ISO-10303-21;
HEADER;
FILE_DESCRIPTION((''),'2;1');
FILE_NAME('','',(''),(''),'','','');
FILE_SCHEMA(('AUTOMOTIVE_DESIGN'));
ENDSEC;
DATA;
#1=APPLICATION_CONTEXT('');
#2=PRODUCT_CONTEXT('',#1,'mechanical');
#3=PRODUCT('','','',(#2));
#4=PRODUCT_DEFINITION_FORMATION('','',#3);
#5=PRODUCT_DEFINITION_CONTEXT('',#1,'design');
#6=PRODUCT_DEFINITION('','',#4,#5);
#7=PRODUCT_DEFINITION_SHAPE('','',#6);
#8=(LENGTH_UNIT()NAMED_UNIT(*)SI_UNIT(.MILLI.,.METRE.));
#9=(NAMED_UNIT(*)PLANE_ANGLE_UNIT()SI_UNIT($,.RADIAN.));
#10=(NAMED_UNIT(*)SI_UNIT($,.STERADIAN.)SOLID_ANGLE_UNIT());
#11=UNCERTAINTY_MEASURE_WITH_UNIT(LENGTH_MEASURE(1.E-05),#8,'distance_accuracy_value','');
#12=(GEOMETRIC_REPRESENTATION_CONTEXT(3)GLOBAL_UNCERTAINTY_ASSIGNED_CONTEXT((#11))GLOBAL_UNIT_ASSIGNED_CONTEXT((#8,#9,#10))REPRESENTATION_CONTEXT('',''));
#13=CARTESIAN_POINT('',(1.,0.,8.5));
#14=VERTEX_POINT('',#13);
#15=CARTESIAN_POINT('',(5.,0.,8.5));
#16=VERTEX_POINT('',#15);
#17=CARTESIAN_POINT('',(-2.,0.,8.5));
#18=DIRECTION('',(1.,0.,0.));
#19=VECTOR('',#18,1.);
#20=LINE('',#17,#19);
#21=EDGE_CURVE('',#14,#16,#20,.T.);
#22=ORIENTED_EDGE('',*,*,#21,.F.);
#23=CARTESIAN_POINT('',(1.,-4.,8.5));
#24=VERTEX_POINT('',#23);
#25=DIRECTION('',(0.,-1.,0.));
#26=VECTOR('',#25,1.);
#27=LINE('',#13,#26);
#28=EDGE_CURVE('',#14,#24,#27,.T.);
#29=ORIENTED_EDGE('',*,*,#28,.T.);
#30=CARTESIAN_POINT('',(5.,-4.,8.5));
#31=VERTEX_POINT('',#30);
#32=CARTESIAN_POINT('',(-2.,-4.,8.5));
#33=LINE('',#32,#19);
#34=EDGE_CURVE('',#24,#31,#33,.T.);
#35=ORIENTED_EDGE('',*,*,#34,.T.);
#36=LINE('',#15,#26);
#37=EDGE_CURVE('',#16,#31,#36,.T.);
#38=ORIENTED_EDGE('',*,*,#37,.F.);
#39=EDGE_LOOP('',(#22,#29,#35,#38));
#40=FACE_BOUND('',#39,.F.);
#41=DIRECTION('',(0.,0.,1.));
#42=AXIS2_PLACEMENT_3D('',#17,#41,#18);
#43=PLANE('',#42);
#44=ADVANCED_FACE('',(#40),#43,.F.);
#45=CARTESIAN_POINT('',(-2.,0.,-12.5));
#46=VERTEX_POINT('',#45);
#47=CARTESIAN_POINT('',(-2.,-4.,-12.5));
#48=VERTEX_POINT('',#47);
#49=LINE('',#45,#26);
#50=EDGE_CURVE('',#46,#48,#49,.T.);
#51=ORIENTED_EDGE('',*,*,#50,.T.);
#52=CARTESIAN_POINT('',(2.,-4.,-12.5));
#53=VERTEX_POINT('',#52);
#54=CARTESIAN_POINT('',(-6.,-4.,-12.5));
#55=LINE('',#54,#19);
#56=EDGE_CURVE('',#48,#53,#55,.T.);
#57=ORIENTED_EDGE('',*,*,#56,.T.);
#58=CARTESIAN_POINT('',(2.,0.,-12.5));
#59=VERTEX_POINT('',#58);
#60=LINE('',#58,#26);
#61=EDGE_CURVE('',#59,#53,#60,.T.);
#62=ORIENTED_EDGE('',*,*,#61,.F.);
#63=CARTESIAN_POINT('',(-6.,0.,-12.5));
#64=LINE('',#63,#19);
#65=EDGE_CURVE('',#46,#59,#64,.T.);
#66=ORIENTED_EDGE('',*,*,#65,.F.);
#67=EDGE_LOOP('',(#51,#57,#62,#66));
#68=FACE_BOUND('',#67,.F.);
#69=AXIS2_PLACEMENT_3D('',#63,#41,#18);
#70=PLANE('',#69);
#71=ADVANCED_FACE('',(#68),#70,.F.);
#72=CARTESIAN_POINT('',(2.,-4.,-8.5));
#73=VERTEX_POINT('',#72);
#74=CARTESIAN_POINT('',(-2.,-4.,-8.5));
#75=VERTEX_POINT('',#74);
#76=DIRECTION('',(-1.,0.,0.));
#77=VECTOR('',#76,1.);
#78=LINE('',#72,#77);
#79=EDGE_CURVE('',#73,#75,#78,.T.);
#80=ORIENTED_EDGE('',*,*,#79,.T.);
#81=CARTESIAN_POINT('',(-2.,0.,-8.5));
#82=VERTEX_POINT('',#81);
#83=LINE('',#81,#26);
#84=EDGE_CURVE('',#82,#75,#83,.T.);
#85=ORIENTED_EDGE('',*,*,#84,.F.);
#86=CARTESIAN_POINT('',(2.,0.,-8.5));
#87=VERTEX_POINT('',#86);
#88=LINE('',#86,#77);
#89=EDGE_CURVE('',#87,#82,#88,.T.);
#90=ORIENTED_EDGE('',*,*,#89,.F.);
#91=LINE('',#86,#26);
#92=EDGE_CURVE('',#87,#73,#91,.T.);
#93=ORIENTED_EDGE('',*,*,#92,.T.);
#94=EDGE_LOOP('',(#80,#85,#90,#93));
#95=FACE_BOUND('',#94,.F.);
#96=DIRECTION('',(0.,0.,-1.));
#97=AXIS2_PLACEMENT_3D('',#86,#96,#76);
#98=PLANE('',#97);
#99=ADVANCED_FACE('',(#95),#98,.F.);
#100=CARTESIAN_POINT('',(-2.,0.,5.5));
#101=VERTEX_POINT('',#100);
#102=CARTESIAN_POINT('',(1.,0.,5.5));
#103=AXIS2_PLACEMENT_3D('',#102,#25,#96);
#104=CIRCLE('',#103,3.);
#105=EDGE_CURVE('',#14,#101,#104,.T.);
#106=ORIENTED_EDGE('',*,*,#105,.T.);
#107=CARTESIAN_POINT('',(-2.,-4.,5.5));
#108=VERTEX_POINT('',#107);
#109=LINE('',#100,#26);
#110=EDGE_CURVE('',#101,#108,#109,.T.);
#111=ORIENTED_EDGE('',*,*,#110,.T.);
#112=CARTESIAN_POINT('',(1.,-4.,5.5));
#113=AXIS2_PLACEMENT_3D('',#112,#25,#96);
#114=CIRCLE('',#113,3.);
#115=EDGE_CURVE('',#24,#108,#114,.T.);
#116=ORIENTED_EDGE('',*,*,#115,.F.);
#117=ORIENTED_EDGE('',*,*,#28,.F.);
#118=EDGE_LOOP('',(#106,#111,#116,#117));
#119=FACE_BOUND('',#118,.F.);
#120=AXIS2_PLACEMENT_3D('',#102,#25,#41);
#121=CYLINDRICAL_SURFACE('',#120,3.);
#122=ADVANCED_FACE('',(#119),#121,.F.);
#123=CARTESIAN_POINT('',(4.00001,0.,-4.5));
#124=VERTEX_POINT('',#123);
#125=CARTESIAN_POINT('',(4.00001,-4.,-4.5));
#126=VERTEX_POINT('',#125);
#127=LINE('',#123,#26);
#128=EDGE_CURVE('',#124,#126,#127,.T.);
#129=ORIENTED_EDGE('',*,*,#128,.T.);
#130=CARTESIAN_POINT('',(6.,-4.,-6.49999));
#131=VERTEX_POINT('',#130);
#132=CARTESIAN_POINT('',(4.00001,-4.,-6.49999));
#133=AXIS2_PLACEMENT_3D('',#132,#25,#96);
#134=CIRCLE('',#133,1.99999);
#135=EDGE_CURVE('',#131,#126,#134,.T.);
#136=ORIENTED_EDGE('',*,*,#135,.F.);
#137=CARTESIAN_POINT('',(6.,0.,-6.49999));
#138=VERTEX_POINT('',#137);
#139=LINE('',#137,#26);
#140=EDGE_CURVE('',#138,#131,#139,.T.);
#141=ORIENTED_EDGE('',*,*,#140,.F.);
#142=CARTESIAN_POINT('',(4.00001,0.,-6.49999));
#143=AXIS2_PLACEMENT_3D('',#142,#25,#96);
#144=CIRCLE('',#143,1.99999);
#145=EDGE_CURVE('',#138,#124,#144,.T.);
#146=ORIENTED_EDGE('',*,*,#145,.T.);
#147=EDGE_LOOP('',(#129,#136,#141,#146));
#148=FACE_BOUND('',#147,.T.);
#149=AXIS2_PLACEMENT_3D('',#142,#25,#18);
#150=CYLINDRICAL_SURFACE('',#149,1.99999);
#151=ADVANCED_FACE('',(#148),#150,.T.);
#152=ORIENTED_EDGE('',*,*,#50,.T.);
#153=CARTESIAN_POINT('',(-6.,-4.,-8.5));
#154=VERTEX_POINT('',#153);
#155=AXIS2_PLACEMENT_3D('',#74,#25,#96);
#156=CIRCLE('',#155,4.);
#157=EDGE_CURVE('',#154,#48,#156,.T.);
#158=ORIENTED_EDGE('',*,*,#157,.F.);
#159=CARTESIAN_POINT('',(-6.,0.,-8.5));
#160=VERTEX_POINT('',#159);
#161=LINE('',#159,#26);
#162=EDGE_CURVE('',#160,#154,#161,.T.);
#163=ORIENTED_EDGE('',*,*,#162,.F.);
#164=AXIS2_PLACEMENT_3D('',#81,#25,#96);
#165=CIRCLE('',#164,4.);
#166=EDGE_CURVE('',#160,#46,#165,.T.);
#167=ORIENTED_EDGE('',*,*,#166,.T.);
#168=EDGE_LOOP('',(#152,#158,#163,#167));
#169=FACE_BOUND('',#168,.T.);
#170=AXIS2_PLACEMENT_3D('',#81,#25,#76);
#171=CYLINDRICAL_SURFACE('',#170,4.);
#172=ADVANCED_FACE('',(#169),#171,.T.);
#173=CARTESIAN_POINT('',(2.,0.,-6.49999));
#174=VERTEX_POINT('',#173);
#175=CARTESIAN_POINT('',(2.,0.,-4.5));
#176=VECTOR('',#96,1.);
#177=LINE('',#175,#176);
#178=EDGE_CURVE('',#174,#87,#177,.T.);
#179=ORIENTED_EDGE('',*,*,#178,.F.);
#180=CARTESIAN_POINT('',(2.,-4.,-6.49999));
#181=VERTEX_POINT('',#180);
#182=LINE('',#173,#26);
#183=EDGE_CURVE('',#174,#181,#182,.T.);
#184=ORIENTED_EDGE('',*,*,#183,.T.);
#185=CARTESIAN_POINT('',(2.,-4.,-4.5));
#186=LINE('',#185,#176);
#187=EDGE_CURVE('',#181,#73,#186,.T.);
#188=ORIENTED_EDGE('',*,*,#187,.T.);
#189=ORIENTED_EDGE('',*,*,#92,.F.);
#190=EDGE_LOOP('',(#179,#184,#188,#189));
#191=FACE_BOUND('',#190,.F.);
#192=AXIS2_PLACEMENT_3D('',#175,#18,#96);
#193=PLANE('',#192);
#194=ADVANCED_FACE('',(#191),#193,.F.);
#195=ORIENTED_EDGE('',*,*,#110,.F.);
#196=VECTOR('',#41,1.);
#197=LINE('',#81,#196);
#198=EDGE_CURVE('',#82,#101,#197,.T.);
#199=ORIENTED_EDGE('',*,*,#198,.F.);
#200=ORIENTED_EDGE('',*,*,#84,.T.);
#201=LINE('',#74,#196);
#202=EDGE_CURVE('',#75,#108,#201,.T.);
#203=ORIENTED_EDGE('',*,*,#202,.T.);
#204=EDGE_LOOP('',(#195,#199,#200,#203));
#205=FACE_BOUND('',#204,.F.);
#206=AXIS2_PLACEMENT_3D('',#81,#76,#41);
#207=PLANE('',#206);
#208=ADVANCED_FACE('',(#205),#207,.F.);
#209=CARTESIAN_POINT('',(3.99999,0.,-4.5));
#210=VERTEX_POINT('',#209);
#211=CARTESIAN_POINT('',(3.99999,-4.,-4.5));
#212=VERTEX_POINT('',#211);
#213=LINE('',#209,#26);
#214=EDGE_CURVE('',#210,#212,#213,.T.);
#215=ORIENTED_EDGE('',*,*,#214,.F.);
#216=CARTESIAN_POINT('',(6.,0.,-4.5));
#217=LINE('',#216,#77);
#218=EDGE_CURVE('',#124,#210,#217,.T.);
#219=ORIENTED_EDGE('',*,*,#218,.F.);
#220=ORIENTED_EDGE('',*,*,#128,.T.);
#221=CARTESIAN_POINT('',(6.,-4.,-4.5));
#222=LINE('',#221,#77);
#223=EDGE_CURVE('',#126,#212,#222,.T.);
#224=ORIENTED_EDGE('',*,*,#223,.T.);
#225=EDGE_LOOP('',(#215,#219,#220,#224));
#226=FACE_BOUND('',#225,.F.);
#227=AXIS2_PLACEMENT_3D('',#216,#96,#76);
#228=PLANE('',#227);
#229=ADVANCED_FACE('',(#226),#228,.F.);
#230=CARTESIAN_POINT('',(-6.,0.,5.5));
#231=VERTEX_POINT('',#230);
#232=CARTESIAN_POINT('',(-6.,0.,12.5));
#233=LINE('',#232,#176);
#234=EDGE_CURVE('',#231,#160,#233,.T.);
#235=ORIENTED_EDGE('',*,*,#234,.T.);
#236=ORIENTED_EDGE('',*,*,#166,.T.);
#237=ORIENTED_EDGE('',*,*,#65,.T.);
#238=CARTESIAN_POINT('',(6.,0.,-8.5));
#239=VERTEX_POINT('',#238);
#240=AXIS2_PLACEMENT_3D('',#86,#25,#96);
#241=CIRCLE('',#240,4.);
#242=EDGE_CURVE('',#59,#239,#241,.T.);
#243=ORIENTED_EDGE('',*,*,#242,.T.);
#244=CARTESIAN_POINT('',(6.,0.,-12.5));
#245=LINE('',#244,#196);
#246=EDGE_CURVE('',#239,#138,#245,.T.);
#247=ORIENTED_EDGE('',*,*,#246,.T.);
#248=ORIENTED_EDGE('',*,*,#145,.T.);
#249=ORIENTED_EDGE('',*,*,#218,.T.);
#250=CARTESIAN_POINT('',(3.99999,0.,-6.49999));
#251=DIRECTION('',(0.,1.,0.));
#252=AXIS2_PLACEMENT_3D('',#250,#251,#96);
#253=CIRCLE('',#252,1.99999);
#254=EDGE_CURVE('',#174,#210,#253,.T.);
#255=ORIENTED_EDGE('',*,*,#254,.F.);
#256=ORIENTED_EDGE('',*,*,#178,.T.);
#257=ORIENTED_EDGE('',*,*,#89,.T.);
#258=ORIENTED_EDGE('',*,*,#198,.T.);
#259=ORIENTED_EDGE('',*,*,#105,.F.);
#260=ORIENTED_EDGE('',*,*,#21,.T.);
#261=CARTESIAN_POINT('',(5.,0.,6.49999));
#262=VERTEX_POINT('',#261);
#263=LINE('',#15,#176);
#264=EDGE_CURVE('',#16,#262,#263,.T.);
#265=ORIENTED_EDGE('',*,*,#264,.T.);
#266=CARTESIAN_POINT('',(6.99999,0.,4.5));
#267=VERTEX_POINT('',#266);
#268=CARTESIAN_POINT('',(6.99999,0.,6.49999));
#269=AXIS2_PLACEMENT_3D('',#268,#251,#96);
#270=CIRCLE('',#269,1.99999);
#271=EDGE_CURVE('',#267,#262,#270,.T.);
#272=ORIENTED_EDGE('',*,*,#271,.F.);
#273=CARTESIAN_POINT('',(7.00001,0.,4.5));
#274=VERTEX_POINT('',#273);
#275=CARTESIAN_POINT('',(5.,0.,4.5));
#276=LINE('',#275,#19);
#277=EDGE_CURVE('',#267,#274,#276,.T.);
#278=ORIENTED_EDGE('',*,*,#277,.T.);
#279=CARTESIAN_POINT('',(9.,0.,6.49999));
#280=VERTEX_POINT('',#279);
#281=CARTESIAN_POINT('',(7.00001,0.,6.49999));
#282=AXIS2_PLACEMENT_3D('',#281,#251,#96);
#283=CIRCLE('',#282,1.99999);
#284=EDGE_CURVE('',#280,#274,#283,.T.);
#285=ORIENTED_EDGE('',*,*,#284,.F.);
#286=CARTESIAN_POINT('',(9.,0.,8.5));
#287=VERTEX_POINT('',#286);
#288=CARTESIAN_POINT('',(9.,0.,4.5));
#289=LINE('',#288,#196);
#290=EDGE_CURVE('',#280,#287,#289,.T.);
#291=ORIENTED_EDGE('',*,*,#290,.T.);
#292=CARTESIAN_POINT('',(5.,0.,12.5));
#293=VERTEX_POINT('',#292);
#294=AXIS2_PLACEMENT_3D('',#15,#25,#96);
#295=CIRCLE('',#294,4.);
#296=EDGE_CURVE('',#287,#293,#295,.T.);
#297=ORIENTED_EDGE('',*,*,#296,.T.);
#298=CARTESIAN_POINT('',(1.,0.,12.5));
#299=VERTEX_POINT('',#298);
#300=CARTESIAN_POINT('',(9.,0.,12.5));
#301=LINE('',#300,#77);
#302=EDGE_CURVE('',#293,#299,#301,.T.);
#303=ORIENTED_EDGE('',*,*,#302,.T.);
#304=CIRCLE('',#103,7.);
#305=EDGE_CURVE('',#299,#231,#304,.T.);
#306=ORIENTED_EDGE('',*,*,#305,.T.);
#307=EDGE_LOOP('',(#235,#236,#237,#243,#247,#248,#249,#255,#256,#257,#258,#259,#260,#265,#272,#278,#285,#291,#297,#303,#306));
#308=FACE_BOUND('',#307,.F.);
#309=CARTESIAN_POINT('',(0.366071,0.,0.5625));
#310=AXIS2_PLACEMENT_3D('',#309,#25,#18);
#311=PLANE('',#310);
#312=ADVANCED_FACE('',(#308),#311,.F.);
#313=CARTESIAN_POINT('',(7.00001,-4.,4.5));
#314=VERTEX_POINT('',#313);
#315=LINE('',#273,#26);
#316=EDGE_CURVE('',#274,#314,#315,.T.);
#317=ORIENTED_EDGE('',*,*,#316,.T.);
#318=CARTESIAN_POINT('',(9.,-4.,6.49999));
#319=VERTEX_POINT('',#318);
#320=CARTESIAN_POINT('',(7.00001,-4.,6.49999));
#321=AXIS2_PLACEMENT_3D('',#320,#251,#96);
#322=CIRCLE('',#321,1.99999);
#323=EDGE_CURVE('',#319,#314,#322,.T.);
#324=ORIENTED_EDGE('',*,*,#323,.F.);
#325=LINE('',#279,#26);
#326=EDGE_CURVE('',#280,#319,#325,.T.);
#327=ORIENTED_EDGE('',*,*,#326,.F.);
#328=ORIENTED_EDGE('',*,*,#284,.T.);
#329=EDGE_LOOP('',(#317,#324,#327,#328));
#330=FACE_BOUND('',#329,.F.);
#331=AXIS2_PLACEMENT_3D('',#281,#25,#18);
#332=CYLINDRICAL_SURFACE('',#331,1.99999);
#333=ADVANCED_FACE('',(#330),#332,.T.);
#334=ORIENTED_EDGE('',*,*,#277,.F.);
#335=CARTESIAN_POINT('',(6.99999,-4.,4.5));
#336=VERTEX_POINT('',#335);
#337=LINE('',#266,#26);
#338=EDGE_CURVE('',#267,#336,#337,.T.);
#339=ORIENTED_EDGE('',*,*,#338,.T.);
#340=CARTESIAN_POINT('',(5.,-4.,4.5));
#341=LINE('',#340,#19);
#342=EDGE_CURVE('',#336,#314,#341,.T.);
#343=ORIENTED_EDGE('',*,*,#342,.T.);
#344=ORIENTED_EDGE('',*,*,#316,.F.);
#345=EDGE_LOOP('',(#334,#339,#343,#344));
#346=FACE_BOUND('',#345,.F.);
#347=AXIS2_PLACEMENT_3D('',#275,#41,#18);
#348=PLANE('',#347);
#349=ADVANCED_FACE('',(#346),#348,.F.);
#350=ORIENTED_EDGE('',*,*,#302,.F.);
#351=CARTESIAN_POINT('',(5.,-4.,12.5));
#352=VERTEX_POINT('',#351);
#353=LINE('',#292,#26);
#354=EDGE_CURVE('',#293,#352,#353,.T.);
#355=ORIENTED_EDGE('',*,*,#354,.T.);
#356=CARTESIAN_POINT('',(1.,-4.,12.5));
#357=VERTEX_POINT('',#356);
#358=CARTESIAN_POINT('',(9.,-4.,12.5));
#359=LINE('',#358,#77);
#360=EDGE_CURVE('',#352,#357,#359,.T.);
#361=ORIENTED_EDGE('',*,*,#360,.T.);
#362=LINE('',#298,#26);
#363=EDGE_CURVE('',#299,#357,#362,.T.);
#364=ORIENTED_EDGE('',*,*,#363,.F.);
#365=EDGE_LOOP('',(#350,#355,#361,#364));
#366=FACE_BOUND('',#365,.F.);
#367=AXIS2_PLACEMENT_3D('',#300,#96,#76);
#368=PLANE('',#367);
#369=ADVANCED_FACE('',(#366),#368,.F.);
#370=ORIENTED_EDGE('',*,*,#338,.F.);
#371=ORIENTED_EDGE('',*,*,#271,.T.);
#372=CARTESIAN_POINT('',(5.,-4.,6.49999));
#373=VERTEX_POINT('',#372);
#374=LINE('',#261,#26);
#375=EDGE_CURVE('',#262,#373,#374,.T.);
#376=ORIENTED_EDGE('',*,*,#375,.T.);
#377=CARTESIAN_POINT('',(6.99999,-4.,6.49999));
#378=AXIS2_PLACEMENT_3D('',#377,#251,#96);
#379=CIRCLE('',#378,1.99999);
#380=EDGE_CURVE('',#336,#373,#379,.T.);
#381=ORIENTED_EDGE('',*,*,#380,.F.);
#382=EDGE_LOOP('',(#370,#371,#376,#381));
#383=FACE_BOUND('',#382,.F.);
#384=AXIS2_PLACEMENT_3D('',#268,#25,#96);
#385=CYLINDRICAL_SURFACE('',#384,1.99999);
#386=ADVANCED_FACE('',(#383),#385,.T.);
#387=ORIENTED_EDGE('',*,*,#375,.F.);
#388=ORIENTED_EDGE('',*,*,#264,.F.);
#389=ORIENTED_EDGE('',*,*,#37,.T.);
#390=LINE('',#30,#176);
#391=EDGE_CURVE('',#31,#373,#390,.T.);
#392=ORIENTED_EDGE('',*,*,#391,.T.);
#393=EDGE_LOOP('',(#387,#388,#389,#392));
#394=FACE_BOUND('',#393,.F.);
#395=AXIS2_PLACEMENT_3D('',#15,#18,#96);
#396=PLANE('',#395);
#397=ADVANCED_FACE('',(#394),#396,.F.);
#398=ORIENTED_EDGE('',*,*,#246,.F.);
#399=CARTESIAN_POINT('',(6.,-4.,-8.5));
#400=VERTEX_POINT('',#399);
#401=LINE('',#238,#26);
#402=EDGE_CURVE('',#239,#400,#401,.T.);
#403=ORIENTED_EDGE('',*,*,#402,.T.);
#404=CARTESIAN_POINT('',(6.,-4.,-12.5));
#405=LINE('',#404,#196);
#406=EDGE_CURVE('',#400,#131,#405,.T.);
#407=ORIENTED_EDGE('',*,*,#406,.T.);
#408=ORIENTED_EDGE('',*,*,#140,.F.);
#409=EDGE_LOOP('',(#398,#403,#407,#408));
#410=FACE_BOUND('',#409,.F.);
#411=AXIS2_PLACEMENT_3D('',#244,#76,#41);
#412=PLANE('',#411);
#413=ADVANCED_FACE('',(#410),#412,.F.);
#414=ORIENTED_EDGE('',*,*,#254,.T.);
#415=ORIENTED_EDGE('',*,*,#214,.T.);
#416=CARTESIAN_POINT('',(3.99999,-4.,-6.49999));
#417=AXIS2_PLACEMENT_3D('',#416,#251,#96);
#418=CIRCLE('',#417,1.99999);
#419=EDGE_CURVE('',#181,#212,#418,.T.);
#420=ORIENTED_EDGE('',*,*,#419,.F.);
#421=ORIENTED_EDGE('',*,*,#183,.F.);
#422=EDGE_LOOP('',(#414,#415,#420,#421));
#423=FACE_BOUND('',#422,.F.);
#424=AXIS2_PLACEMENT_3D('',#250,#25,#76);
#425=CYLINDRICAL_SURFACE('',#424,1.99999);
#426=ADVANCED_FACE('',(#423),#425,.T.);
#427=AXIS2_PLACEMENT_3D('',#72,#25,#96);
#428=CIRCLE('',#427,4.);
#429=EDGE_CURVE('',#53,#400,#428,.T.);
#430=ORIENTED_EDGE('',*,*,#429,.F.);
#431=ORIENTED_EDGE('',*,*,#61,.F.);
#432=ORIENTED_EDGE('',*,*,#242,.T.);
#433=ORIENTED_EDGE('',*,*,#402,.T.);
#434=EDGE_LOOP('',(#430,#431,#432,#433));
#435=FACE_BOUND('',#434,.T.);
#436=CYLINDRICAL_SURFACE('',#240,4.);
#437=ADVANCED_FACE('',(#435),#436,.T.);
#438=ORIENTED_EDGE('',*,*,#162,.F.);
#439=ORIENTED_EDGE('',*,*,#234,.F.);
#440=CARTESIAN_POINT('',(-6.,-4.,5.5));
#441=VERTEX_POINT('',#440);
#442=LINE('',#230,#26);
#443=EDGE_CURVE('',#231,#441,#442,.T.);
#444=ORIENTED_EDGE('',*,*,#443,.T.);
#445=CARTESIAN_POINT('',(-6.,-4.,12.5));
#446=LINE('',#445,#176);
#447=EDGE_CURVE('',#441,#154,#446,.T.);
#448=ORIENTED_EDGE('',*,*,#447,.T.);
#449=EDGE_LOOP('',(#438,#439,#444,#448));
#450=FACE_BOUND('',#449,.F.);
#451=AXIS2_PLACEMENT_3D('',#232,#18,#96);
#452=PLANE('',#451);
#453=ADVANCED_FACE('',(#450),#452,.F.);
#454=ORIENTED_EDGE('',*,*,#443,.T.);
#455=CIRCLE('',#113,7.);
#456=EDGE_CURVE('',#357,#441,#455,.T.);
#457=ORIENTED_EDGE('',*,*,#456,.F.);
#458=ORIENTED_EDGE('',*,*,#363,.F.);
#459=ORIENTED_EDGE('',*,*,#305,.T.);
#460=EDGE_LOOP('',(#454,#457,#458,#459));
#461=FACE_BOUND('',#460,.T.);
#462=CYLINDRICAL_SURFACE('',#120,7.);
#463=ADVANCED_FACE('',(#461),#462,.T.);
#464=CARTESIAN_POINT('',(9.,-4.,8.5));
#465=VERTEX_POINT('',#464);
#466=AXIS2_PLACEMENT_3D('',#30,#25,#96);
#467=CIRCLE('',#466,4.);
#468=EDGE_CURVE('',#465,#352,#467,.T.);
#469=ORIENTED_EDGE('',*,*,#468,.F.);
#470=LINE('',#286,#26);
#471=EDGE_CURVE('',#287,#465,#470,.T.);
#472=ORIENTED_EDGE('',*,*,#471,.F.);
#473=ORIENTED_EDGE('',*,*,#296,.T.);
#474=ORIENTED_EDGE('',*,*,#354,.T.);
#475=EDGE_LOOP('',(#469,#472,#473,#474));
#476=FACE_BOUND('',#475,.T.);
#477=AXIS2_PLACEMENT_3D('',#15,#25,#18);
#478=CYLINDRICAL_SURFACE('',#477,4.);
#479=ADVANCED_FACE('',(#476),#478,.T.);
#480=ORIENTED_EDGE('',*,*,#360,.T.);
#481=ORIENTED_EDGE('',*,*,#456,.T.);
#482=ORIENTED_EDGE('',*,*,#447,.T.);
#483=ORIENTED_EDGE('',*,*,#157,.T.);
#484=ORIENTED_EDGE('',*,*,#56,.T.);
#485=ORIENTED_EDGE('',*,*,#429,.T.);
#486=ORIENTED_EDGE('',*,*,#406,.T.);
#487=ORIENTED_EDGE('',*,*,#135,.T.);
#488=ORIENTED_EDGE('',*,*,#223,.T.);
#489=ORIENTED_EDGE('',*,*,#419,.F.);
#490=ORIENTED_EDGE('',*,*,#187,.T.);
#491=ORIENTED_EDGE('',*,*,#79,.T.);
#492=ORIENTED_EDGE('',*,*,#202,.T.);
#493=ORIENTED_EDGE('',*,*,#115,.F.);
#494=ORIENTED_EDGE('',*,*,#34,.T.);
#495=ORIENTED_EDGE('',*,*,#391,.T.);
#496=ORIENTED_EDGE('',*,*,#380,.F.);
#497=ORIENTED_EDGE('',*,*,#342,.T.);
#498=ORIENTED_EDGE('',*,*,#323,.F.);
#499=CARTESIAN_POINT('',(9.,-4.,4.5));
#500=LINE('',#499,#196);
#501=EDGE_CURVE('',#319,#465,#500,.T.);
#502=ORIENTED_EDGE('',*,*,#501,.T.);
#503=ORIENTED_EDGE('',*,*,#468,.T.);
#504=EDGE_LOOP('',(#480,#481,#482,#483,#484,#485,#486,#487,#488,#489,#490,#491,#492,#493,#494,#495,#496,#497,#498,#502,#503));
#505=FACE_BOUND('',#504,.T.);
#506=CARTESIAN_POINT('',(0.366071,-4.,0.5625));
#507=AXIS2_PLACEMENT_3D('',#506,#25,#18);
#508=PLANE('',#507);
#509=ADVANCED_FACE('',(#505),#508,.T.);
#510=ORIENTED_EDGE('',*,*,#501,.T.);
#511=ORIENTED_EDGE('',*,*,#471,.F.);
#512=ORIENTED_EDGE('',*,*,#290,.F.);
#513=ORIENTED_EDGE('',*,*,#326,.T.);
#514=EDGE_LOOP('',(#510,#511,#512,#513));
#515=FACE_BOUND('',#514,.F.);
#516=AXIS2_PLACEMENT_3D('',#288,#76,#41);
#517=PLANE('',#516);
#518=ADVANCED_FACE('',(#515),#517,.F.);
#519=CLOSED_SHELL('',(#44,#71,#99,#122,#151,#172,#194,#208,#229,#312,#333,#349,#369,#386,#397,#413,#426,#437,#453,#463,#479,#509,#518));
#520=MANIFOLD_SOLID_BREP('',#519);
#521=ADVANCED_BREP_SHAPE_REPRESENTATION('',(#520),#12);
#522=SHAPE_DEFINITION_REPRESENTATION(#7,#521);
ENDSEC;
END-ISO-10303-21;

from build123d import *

# Parameters (mm, degrees)
F1_DEPTH = 4
F2_R     = 4
F3_R     = 1.99999
F4_R     = 3
F5_R     = 7


# Not quite as in the source:
# - a fillet or chamfer is up to 0.001 mm smaller than in the source, because OpenCascade refuses the exact size


with BuildPart() as f1:
    # F0 (on Front) → F1 (new body)
    with BuildSketch(Plane.XZ):
        Polygon((9, 4.5), (9, 12.5), (-6, 12.5), (-6, -12.5), (6, -12.5), (6, -4.5), (2, -4.5), (2, -8.5), (-2, -8.5), (-2, 8.5), (5, 8.5), (5, 4.5), align=None)
    extrude(amount=F1_DEPTH)

    # F2
    f2_edges = [f1.edges().sort_by_distance(p)[0] for p in [
        (9, -2, 12.5),
        (-6, -2, -12.5),
        (6, -2, -12.5),
    ]]
    fillet(f2_edges, radius=F2_R)

    # F3 (radius 2 in the source; OpenCascade refuses exactly that, so slightly less here)
    f3_edges = [f1.edges().sort_by_distance(p)[0] for p in [
        (6, -2, -4.5),
        (2, -2, -4.5),
        (9, -2, 4.5),
        (5, -2, 4.5),
    ]]
    fillet(f3_edges, radius=F3_R)

    # F4
    f4_edges = [f1.edges().sort_by_distance(p)[0] for p in [
        (-2, -2, 8.5),
    ]]
    fillet(f4_edges, radius=F4_R)

    # F5
    f5_edges = [f1.edges().sort_by_distance(p)[0] for p in [
        (-6, -2, 12.5),
    ]]
    fillet(f5_edges, radius=F5_R)


solid = f1.part
